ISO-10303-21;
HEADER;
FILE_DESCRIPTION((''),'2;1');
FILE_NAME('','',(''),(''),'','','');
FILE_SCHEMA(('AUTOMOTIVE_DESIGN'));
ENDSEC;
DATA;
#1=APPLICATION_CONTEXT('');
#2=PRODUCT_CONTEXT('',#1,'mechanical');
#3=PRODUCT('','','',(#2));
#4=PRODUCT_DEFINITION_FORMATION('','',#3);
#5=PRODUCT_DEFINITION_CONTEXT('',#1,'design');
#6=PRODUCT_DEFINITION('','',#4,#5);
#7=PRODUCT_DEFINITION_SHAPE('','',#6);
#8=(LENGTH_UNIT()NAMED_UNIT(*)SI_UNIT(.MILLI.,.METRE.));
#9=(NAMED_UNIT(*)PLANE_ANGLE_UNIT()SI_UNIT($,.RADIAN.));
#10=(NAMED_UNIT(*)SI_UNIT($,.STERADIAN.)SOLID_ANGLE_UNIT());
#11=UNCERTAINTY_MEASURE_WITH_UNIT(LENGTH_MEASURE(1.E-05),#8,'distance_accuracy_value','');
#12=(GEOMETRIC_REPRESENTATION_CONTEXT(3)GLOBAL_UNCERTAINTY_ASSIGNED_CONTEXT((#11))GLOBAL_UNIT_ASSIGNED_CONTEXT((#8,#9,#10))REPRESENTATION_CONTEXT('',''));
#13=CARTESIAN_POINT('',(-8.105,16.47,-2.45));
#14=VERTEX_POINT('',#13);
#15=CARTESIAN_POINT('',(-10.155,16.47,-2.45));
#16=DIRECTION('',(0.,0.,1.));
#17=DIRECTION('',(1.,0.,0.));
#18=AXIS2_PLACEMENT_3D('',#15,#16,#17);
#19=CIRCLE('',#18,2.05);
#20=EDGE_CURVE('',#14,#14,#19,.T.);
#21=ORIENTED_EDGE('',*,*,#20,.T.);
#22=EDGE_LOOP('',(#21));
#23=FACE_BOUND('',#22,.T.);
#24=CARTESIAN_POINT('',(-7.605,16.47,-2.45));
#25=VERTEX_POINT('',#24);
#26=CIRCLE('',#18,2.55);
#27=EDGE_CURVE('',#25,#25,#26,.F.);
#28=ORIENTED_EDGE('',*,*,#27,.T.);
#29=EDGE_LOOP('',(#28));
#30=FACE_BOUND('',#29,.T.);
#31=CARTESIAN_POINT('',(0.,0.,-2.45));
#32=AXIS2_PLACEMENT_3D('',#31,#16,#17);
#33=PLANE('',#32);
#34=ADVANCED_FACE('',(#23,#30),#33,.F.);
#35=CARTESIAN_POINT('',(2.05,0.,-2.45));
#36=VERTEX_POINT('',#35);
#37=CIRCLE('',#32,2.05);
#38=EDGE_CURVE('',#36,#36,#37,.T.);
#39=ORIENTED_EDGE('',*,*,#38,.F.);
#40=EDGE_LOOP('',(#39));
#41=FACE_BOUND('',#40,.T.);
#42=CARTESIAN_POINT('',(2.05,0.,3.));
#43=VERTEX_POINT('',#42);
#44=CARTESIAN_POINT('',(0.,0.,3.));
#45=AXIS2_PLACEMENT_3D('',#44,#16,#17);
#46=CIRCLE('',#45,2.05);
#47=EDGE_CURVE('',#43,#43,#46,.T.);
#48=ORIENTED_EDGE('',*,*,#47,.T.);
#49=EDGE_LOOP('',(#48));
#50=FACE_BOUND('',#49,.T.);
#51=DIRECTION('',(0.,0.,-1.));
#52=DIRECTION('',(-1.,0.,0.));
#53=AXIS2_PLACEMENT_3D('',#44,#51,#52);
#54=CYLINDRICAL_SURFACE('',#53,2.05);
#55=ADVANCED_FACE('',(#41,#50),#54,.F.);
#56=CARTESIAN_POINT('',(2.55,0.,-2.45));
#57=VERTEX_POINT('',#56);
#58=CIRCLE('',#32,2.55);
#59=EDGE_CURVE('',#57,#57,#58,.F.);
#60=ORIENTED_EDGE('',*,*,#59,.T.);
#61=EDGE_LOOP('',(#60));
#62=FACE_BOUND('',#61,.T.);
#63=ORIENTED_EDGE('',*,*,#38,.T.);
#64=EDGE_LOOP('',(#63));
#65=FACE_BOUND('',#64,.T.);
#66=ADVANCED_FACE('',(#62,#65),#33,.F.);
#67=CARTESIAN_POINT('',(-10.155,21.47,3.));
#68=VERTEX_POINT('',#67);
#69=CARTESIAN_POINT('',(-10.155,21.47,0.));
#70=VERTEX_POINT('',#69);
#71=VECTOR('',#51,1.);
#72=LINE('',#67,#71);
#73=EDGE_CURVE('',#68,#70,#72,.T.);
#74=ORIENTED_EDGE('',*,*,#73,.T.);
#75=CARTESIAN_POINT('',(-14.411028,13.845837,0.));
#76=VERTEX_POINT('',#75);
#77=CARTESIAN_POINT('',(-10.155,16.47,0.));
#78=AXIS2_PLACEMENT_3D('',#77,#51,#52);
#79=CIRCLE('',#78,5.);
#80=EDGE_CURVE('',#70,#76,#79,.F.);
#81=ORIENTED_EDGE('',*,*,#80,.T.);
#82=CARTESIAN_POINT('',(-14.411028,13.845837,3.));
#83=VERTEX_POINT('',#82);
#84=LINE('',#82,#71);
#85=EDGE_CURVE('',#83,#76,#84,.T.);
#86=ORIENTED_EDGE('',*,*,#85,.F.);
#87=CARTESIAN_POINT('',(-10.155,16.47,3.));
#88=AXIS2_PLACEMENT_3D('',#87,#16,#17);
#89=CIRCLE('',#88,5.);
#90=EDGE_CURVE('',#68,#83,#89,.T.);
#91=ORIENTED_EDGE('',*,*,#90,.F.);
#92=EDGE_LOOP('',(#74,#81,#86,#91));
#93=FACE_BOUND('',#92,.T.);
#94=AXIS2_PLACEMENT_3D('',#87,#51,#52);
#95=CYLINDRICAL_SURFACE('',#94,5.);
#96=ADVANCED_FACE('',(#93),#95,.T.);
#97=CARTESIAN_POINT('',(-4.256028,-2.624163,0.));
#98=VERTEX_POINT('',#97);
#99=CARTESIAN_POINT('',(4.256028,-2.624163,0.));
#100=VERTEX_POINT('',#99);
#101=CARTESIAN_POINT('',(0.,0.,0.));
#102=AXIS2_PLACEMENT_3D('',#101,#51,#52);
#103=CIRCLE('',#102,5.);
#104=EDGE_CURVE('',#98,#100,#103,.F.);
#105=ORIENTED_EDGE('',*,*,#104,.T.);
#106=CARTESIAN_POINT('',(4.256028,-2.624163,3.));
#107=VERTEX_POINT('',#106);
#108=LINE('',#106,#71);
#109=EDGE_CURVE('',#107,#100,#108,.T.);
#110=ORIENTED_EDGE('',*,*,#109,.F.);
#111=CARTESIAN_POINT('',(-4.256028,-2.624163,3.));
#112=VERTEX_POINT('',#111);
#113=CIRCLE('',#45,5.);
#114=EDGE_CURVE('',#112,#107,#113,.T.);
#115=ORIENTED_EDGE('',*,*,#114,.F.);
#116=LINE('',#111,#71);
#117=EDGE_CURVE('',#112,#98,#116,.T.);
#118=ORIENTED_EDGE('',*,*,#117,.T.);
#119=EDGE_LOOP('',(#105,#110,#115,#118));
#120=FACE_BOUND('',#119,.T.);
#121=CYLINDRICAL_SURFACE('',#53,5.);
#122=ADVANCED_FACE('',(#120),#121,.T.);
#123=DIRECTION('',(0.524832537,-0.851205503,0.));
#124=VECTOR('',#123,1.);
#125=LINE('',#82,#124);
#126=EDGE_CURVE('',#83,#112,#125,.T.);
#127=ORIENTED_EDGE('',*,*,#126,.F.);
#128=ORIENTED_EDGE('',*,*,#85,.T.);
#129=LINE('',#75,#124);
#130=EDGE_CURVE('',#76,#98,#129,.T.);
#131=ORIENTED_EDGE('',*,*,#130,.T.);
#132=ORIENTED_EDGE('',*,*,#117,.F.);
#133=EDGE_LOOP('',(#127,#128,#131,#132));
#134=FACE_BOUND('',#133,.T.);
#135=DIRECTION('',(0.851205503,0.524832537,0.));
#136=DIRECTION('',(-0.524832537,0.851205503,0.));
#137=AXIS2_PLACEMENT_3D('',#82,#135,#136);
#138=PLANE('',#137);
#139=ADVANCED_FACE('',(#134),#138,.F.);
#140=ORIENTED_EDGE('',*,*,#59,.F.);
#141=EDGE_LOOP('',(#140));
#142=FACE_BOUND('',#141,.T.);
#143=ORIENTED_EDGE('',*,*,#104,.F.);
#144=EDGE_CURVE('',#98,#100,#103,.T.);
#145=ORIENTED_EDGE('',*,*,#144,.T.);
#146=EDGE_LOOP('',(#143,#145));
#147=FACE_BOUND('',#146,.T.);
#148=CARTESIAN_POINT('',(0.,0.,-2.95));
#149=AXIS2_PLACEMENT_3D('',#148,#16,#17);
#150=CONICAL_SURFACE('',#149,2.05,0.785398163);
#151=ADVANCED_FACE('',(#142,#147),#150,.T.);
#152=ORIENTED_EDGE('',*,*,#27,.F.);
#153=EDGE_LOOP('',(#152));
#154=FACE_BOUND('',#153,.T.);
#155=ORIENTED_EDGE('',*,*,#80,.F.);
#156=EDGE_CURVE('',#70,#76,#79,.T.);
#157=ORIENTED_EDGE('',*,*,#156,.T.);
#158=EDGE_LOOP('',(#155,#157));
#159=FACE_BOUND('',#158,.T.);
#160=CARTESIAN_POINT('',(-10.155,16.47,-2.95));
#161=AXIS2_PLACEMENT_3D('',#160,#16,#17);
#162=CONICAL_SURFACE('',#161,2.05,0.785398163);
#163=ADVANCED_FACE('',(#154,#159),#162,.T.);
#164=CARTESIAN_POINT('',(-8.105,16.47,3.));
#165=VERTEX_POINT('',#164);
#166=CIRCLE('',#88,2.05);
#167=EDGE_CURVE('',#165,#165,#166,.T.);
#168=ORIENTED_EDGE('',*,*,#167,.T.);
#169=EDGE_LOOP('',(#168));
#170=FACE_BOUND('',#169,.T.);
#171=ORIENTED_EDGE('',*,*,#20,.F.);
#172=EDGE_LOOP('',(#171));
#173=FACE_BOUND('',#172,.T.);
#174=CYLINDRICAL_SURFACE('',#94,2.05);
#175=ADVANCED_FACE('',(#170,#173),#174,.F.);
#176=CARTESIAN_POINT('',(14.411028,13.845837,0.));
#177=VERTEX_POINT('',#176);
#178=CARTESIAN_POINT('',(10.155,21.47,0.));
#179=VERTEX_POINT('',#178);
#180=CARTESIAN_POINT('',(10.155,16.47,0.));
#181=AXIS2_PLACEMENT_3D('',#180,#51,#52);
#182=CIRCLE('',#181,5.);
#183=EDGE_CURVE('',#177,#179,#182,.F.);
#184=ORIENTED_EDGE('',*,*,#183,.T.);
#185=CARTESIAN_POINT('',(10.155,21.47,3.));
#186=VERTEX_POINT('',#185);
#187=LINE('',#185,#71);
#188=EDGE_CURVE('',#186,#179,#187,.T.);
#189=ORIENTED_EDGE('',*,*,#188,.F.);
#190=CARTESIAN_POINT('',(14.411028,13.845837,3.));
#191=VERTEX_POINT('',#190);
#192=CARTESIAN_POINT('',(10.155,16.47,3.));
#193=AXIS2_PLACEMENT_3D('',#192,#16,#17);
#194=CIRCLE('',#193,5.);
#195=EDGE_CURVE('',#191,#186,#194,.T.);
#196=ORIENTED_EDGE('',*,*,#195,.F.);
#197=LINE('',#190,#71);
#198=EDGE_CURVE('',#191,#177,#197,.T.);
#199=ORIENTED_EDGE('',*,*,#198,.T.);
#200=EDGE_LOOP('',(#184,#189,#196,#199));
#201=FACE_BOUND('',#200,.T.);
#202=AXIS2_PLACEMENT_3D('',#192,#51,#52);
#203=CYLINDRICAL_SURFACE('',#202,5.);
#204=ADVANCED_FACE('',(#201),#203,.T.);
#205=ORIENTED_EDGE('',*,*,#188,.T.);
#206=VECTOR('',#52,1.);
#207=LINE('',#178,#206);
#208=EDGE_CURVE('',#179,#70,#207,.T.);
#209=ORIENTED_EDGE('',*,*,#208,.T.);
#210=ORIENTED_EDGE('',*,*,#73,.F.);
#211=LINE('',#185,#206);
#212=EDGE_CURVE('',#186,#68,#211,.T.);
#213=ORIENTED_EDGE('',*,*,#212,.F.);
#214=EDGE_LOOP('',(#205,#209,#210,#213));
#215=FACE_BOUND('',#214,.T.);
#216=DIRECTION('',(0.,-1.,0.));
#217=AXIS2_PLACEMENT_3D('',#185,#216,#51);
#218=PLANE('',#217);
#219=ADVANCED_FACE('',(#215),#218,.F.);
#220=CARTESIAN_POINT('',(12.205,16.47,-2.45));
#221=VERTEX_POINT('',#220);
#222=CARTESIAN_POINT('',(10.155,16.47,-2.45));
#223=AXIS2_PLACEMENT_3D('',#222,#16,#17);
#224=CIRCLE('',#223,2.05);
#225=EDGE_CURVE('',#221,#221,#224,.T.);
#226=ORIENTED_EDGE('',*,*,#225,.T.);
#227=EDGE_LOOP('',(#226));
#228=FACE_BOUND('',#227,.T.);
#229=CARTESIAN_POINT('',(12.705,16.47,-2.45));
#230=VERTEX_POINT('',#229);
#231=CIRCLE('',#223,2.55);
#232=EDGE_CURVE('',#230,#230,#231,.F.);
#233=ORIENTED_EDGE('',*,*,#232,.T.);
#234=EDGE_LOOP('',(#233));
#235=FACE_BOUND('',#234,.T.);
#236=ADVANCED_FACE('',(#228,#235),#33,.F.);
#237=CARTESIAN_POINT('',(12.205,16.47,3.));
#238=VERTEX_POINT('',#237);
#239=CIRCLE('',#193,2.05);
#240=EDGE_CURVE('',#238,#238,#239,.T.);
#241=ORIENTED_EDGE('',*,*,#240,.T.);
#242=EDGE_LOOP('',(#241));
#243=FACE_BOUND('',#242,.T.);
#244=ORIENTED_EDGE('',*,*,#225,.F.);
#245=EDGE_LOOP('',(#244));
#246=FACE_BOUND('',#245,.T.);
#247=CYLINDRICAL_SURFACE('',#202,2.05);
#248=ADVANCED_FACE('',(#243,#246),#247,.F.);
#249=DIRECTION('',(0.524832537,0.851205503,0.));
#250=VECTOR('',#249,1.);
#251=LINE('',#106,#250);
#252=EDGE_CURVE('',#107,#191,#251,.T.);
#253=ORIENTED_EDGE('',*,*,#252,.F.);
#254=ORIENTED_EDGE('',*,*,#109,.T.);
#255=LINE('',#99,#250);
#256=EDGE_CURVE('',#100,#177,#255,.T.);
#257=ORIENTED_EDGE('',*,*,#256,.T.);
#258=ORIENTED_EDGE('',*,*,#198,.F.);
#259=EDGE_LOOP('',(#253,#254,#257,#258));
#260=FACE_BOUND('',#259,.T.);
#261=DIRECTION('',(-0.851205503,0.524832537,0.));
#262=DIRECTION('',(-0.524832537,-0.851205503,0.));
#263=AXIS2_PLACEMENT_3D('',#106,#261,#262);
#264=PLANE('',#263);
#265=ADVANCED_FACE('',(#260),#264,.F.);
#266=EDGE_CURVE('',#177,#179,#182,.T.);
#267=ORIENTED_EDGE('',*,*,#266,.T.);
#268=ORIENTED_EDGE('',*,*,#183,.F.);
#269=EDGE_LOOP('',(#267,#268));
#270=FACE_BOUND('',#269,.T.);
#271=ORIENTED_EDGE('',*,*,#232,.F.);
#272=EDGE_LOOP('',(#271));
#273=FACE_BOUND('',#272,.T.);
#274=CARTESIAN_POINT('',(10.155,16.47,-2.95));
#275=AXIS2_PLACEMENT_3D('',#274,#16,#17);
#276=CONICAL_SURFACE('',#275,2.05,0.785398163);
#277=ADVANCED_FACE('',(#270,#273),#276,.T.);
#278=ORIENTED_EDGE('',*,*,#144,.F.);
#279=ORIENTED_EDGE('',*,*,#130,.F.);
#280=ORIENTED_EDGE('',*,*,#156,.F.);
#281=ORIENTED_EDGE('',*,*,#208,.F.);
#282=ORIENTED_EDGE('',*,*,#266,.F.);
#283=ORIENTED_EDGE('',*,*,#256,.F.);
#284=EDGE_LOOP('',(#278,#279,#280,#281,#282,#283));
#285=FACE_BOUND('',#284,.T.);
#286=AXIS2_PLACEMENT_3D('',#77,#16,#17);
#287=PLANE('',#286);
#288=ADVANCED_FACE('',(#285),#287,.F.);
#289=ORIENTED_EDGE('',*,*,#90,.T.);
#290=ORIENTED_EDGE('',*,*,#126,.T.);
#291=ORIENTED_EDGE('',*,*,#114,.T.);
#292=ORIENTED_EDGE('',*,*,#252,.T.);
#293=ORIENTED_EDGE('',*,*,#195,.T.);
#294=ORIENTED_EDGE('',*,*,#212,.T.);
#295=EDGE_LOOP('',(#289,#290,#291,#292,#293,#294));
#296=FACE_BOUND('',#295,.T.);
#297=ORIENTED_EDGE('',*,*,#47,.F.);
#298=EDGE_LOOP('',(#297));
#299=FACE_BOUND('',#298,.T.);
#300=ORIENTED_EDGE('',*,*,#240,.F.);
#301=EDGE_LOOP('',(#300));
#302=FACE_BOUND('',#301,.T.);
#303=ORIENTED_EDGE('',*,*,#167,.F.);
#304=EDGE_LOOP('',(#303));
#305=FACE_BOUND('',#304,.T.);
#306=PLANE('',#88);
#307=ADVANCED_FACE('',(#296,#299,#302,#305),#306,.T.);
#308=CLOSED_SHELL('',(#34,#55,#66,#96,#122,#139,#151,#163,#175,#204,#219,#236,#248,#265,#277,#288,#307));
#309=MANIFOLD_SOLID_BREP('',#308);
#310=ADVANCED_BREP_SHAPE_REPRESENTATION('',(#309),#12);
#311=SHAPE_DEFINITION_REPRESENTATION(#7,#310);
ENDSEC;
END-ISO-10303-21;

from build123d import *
from build123d.topology import SkipClean

# Parameters (mm, degrees)
SKETCH1_R           = 2.0500000000000003
SKETCH1_R_2         = 2.05
BOSS_EXTRUDE1_DEPTH = 3
BOSS_EXTRUDE2_START = 2.95
SKETCH2_R           = 4.999999999999997
SKETCH2_R_2         = 2.05
SKETCH2_R_3         = 4.999999999999999
SKETCH2_R_4         = 2.0500000000000003
SKETCH2_R_5         = 4.999999999999998
SKETCH2_R_6         = 2.0499999999999985
BOSS_EXTRUDE2_DEPTH = 2.95
CHAMFER1_SIZE       = 2.95
SKETCH3_W           = 37.85330439531782
SKETCH3_H           = 28.758532039103056
CUT_EXTRUDE1_DEPTH  = 0.5


with BuildPart() as part:
    # Sketch1 → Boss-Extrude1 (new body)
    with BuildSketch(Plane.XY):
        with BuildLine():
            Line((-14.411027514700965, 13.845837315616981), (-4.256027514700967, -2.624162684383019))
            ThreePointArc((-4.256027514700967, -2.624162684383019), (3.1e-16, -4.999999999999998), (4.256027514700967, -2.624162684383019))
            Line((4.256027514700967, -2.624162684383019), (14.411027514700965, 13.845837315616981))
            ThreePointArc((14.411027514700965, 13.845837315616981), (14.52082256979799, 18.907128082198888), (10.155000000000001, 21.46999999999999))
            Line((10.155000000000001, 21.46999999999999), (-10.155000000000001, 21.46999999999999))
            ThreePointArc((-10.155000000000001, 21.46999999999999), (-14.520822569797986, 18.907128082198888), (-14.411027514700965, 13.845837315616981))
        make_face()
        with Locations((-10.155, 16.47)):
            Circle(SKETCH1_R, mode=Mode.SUBTRACT)
        with Locations((10.155, 16.47)):
            Circle(SKETCH1_R, mode=Mode.SUBTRACT)
        Circle(SKETCH1_R_2, mode=Mode.SUBTRACT)
    extrude(amount=BOSS_EXTRUDE1_DEPTH)

    # Sketch2 → Boss-Extrude2 (add)
    # profile 1 of 3: a face of its own
    with BuildSketch(Plane(origin=(0, 0, 0), x_dir=(-1, 0, 0), z_dir=(0, 0, -1)).offset(BOSS_EXTRUDE2_START)):
        Circle(SKETCH2_R)
        Circle(SKETCH2_R_2, mode=Mode.SUBTRACT)
    # profile 2 of 3: a face of its own
    with BuildSketch(Plane(origin=(0, 0, 0), x_dir=(-1, 0, 0), z_dir=(0, 0, -1)).offset(BOSS_EXTRUDE2_START)):
        with Locations((10.155, 16.47)):
            Circle(SKETCH2_R_3)
        with Locations((10.155, 16.47)):
            Circle(SKETCH2_R_4, mode=Mode.SUBTRACT)
    # profile 3 of 3: a face of its own
    with BuildSketch(Plane(origin=(0, 0, 0), x_dir=(-1, 0, 0), z_dir=(0, 0, -1)).offset(BOSS_EXTRUDE2_START)):
        with Locations((-10.155, 16.47)):
            Circle(SKETCH2_R_5)
        with Locations((-10.155, 16.47)):
            Circle(SKETCH2_R_6, mode=Mode.SUBTRACT)
    extrude(amount=-BOSS_EXTRUDE2_DEPTH)

    # Chamfer1
    chamfer1_edges = [part.edges().sort_by_distance(p)[0] for p in [
        (4.999999999999997, 6.1e-16, -2.95),
        (-5.155, 16.47, -2.95),
        (15.154999999999998, 16.47, -2.95),
    ]]
    chamfer(chamfer1_edges, length=CHAMFER1_SIZE - 0.0001)  # a hair under: the kernel refuses the full size

    # Sketch3 → Cut-Extrude1 (cut)
    with SkipClean():  # the faces are left unmerged after this step: merging them gives an invalid solid
        with BuildSketch(Plane.XY.offset(-2.95)):
            with Locations((0.24948253346224725, 7.962837236222983)):
                Rectangle(SKETCH3_W, SKETCH3_H)
        extrude(amount=CUT_EXTRUDE1_DEPTH, mode=Mode.SUBTRACT)


solid = part.part
